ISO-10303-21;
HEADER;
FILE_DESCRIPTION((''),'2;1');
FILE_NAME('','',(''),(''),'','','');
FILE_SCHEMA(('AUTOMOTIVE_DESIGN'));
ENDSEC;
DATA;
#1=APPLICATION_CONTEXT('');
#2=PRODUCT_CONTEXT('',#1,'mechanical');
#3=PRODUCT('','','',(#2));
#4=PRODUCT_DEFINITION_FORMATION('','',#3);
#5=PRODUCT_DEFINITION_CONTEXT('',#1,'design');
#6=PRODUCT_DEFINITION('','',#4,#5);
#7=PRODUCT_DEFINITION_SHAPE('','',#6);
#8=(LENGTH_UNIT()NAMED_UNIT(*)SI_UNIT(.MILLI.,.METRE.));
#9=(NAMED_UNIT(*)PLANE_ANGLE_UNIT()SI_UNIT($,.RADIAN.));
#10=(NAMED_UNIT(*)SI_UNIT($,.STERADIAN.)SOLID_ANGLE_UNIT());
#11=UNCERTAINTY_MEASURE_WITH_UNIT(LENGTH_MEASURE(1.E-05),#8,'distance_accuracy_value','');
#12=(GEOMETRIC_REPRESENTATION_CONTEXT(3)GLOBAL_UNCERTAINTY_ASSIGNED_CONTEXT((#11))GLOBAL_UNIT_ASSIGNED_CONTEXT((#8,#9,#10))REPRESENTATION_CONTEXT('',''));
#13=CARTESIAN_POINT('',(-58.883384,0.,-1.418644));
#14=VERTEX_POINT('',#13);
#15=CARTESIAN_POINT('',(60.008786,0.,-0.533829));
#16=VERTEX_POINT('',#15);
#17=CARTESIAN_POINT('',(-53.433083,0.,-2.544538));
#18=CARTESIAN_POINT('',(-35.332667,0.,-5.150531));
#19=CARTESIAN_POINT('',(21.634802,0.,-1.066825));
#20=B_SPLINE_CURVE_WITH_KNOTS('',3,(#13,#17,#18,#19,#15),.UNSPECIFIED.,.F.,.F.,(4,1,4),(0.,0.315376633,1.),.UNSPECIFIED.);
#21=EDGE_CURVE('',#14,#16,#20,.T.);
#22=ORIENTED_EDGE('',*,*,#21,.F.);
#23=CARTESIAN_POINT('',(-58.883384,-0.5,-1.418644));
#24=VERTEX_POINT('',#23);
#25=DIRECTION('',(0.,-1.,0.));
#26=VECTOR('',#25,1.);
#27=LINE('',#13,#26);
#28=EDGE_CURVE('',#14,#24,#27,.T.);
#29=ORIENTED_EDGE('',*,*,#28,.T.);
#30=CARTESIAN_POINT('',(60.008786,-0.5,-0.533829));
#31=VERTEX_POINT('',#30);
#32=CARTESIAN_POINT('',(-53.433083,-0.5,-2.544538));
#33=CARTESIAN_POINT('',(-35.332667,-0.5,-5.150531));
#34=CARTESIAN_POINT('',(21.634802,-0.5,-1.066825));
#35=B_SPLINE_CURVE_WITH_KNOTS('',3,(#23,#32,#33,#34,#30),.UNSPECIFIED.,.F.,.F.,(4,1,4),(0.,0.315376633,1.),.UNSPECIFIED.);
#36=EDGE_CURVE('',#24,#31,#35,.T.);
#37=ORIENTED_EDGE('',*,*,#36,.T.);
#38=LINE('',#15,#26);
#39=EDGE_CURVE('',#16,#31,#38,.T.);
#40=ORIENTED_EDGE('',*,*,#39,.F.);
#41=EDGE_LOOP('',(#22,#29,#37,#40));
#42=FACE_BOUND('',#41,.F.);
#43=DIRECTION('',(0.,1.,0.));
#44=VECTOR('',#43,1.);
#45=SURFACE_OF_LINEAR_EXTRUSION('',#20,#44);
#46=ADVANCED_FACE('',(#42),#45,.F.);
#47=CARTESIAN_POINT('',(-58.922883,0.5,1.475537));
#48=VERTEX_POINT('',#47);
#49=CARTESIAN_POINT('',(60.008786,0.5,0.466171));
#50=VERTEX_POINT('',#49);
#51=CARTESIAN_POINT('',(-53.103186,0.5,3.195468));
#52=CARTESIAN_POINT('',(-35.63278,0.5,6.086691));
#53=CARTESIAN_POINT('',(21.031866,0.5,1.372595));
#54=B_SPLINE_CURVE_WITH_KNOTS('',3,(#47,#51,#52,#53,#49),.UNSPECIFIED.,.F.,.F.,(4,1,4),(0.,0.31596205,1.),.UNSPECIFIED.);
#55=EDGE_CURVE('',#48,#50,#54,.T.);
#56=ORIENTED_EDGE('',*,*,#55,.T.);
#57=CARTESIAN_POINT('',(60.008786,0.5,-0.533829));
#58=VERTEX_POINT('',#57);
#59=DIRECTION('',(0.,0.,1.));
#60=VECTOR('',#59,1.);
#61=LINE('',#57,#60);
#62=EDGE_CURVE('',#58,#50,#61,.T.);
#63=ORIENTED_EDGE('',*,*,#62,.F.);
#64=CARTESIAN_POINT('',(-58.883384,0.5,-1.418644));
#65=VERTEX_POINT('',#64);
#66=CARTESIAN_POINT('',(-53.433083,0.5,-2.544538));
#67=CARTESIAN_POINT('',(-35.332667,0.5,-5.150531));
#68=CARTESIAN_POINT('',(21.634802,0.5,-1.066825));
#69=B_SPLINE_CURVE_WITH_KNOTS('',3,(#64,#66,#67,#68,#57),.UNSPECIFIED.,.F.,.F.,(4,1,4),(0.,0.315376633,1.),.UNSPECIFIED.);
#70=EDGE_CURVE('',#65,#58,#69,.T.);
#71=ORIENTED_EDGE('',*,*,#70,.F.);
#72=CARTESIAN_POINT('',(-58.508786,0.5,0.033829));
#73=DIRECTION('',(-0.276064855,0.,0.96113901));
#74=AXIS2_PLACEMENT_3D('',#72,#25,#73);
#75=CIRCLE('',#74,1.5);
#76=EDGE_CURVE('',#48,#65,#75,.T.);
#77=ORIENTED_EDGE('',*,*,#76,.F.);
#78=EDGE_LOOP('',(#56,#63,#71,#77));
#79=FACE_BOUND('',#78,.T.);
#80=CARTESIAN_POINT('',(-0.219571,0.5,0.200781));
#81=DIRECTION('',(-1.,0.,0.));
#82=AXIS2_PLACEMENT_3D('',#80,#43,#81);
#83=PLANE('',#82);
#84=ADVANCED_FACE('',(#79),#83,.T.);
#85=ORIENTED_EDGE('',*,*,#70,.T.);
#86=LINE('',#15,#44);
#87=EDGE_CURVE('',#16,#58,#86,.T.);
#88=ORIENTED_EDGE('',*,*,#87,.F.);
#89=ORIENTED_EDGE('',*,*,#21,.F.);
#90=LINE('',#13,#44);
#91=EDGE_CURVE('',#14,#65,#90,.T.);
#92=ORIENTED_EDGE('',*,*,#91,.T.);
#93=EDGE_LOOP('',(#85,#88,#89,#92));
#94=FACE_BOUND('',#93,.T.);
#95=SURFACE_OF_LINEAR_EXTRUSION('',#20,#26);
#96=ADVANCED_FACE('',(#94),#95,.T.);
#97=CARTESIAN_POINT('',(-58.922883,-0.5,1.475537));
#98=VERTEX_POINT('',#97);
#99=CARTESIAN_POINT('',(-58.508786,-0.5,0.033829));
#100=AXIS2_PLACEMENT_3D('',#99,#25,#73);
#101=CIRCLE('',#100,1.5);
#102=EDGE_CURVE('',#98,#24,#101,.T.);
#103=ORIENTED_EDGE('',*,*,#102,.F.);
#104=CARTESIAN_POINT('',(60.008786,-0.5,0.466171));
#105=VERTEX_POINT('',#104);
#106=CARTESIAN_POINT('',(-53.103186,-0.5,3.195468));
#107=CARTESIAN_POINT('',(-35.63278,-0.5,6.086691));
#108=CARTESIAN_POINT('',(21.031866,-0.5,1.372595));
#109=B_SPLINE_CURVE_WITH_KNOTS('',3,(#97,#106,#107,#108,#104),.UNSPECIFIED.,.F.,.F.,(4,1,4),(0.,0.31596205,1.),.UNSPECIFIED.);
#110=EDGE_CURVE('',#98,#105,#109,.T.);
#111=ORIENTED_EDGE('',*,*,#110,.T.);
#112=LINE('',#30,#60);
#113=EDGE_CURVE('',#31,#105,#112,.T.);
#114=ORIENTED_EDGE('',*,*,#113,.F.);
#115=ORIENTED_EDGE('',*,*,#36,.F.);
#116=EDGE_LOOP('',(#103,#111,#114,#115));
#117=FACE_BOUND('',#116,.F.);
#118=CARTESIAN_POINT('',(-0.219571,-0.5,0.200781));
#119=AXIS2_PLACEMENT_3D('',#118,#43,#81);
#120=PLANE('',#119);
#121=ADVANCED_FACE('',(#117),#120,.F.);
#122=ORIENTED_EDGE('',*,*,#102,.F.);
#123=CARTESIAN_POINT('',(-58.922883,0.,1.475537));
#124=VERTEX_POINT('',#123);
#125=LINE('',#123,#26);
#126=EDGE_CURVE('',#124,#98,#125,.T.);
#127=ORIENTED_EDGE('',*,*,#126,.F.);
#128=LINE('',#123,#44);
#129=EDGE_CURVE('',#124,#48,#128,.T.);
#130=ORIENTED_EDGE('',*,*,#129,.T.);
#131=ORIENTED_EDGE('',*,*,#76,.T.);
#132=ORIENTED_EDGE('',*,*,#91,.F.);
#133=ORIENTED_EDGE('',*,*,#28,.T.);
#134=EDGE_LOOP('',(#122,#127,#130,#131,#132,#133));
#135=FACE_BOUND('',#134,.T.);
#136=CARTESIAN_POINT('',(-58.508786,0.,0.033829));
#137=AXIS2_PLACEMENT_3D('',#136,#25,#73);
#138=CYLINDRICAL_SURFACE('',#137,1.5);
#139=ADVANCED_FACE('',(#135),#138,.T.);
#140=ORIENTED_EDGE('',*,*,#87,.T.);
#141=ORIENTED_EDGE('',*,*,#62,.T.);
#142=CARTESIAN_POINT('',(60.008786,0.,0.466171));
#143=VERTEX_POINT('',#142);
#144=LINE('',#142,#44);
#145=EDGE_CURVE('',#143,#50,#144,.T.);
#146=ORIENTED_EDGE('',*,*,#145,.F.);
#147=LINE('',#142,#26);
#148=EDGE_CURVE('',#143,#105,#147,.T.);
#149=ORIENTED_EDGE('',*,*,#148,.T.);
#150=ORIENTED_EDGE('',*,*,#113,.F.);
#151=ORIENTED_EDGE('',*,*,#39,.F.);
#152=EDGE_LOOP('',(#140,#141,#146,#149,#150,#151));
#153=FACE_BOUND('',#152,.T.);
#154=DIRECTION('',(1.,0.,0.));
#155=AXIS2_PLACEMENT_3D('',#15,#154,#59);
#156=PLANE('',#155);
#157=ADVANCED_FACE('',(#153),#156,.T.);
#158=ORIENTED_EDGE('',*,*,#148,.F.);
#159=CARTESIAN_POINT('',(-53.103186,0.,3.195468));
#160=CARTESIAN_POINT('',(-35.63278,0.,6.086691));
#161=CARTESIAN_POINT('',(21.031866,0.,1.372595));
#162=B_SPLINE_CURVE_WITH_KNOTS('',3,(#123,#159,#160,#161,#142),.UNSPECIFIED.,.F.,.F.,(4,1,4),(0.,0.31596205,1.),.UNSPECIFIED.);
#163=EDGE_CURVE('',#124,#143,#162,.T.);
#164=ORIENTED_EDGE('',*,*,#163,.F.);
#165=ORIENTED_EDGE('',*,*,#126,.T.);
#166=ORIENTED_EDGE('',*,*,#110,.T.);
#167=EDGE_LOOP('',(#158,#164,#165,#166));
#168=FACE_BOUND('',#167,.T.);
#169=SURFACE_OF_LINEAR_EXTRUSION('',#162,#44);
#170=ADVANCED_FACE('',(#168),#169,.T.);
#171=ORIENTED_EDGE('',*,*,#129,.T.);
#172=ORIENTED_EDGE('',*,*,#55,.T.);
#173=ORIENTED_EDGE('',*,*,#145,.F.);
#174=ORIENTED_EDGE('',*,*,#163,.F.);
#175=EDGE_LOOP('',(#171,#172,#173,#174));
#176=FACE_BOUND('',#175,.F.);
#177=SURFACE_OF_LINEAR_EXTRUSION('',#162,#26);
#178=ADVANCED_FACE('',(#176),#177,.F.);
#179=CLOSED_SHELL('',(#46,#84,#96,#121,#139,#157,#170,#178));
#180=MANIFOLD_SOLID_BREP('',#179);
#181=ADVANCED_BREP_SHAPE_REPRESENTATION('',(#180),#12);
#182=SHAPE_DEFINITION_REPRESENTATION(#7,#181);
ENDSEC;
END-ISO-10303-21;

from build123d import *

# Parameters (mm, degrees)
F0_R     = 2.2
F1_DEPTH = 0.5


# Not quite as in the source:
# - a feature names something its author has since deleted; it is built from what else it names


with BuildPart() as f1:
    # F0 (on Front) → F1 (new body, symmetric)
    with BuildSketch(Plane.XZ):
        with BuildLine():
            add(Edge.make_bspline(
                [(-58.9228828544, 1.4755374035), (-53.1031861901, 3.1954683363), (-35.6327797164, 6.0866905267), (21.0318658501, 1.3725945028), (60.0087855716, 0.4661711108)],
                knots=[0, 0, 0, 0, 0.3159620499, 1, 1, 1, 1], degree=3))
            ThreePointArc((-58.9228828544, 1.4755374035), (-60.0086458958, 0.0133592085), (-58.8833838701, -1.4186435253))
            add(Edge.make_bspline(
                [(-58.8833838701, -1.4186435253), (-53.4330829978, -2.5445383508), (-35.3326671897, -5.1505314866), (21.6348022223, -1.0668247705), (60.0087855716, -0.5338288892)],
                knots=[0, 0, 0, 0, 0.3153766332, 1, 1, 1, 1], degree=3))
            Line((60.0087855716, -0.5338288892), (60.0087855716, -0.0338288892))
            Line((60.0087855716, -0.0338288892), (60.0087855716, 0.4661711108))
        make_face()
        with BuildLine():
            add(Edge.make_bspline(
                [(-38.2616780698, 3.6168415099), (-37.3862738566, 3.620107016), (-36.5051030136, 3.6204740501), (-35.618541931, 3.6180910206)],
                knots=[0, 0, 0, 0, 2.8040999397, 2.8040999397, 2.8040999397, 2.8040999397], degree=3))
            add(Edge.make_bspline(
                [(-35.618541931, 3.6180910206), (-28.2361493541, 3.598247538), (-20.4800034879, 3.3877176683), (-12.5674262287, 3.0721900892)],
                knots=[2.8040999397, 2.8040999397, 2.8040999397, 2.8040999397, 26.1538352096, 26.1538352096, 26.1538352096, 26.1538352096], degree=3))
            add(Edge.make_bspline(
                [(-12.5674262287, 3.0721900892), (-12.2191674657, 3.0583026741), (-11.8706056681, 3.0442118605), (-11.5217593652, 3.0299249541)],
                knots=[26.1538352096, 26.1538352096, 26.1538352096, 26.1538352096, 27.1815344858, 27.1815344858, 27.1815344858, 27.1815344858], degree=3))
            add(Edge.make_bspline(
                [(-11.5217593652, 3.0299249541), (-4.8786493859, 2.7578581748), (1.8676333595, 2.4146805186), (8.5891307931, 2.0508450631)],
                knots=[27.1815344858, 27.1815344858, 27.1815344858, 27.1815344858, 46.7520996913, 46.7520996913, 46.7520996913, 46.7520996913], degree=3))
            add(Edge.make_bspline(
                [(8.5891307931, 2.0508450631), (8.9659043148, 2.0304502675), (9.3425999571, 2.0099905618), (9.7191951821, 1.9894748324)],
                knots=[46.7520996913, 46.7520996913, 46.7520996913, 46.7520996913, 47.8491276748, 47.8491276748, 47.8491276748, 47.8491276748], degree=3))
            add(Edge.make_bspline(
                [(9.7191951821, 1.9894748324), (22.9972566346, 1.2661275955), (36.1504854864, 0.4731351449), (48.1910333037, 0)],
                knots=[47.8491276748, 47.8491276748, 47.8491276748, 47.8491276748, 86.5283355113, 86.5283355113, 86.5283355113, 86.5283355113], degree=3))
            add(Edge.make_bspline(
                [(9.7191951821, -1.4306571949), (23.0872151546, -0.8738704636), (36.291554297, -0.3020974887), (48.1910333037, 0)],
                knots=[47.589168745, 47.589168745, 47.589168745, 47.589168745, 86.3670691529, 86.3670691529, 86.3670691529, 86.3670691529], degree=3))
            add(Edge.make_bspline(
                [(8.5891307931, -1.4776679077), (8.9659317989, -1.4620138036), (9.3426284313, -1.4463414451), (9.7191951821, -1.4306571949)],
                knots=[46.4968253771, 46.4968253771, 46.4968253771, 46.4968253771, 47.589168745, 47.589168745, 47.589168745, 47.589168745], degree=3))
            add(Edge.make_bspline(
                [(-8.0119146338, -2.1358759001), (-2.5096790564, -1.9338850607), (3.0509994649, -1.7077481956), (8.5891307931, -1.4776679077)],
                knots=[30.4418230465, 30.4418230465, 30.4418230465, 30.4418230465, 46.4968253771, 46.4968253771, 46.4968253771, 46.4968253771], degree=3))
            add(Edge.make_bspline(
                [(-9.1685029524, -2.1780045759), (-8.7832794964, -2.1640850551), (-8.3977407486, -2.1500398412), (-8.0119146338, -2.1358759001)],
                knots=[29.3160189827, 29.3160189827, 29.3160189827, 29.3160189827, 30.4418230465, 30.4418230465, 30.4418230465, 30.4418230465], degree=3))
            add(Edge.make_bspline(
                [(-16.1278416778, -2.4155654967), (-13.8237679533, -2.3420223971), (-11.5019196333, -2.262319385), (-9.1685029524, -2.1780045759)],
                knots=[22.4966783089, 22.4966783089, 22.4966783089, 22.4966783089, 29.3160189827, 29.3160189827, 29.3160189827, 29.3160189827], degree=3))
            add(Edge.make_bspline(
                [(-17.6034438118, -2.4618844422), (-17.1124296707, -2.4467365601), (-16.620542064, -2.4312918657), (-16.1278416778, -2.4155654967)],
                knots=[21.0384386058, 21.0384386058, 21.0384386058, 21.0384386058, 22.4966783089, 22.4966783089, 22.4966783089, 22.4966783089], degree=3))
            add(Edge.make_bspline(
                [(-35.618541931, -2.8627375282), (-29.832875954, -2.7963595375), (-23.7874330759, -2.6526617177), (-17.6034438118, -2.4618844422)],
                knots=[2.6729010132, 2.6729010132, 2.6729010132, 2.6729010132, 21.0384386058, 21.0384386058, 21.0384386058, 21.0384386058], degree=3))
            add(Edge.make_bspline(
                [(-38.1277799606, -2.8867127839), (-37.2971189192, -2.8804209375), (-36.4605816684, -2.8723981111), (-35.618541931, -2.8627375282)],
                knots=[0, 0, 0, 0, 2.6729010132, 2.6729010132, 2.6729010132, 2.6729010132], degree=3))
            add(Edge.make_bspline(
                [(-41.2343927197, -2.813945704), (-40.1954922608, -2.8458899458), (-39.1588154774, -2.8693293605), (-38.1277799606, -2.8867127839)],
                knots=[17.7850046696, 17.7850046696, 17.7850046696, 17.7850046696, 20.8486920648, 20.8486920648, 20.8486920648, 20.8486920648], degree=3))
            add(Edge.make_bspline(
                [(-58.8833838701, -0.9187526302), (-53.3711660516, -2.1564612924), (-47.2653113899, -2.6285062592), (-41.2343927197, -2.813945704)],
                knots=[0, 0, 0, 0, 17.7850046696, 17.7850046696, 17.7850046696, 17.7850046696], degree=3))
            ThreePointArc((-58.8833838701, -0.9187526302), (-59.3690674128, 0.0570033976), (-58.9228828544, 1.0514417663))
            add(Edge.make_bspline(
                [(-58.9228828544, 1.0514417663), (-53.1244599749, 2.7082601042), (-46.8471278917, 3.3047021461), (-41.2402659449, 3.5280295404)],
                knots=[0, 0, 0, 0, 17.6226858026, 17.6226858026, 17.6226858026, 17.6226858026], degree=3))
            add(Edge.make_bspline(
                [(-41.2402659449, 3.5280295404), (-40.2230472035, 3.5685464665), (-39.2278967387, 3.5967824619), (-38.2616780698, 3.6168415099)],
                knots=[17.6226858026, 17.6226858026, 17.6226858026, 17.6226858026, 20.8198621272, 20.8198621272, 20.8198621272, 20.8198621272], degree=3))
        make_face(mode=Mode.SUBTRACT)
        with BuildLine():
            add(Edge.make_bspline(
                [(-35.618541931, 3.6180910206), (-28.2361493541, 3.598247538), (-20.4800034879, 3.3877176683), (-12.5674262287, 3.0721900892)],
                knots=[2.8040999397, 2.8040999397, 2.8040999397, 2.8040999397, 26.1538352096, 26.1538352096, 26.1538352096, 26.1538352096], degree=3))
            Line((-35.618541931, 3.6180910206), (-35.618541931, -2.8627375282))
            add(Edge.make_bspline(
                [(-35.618541931, -2.8627375282), (-29.832875954, -2.7963595375), (-23.7874330759, -2.6526617177), (-17.6034438118, -2.4618844422)],
                knots=[2.6729010132, 2.6729010132, 2.6729010132, 2.6729010132, 21.0384386058, 21.0384386058, 21.0384386058, 21.0384386058], degree=3))
            Line((-17.6034438118, -2.4618844422), (-12.5674262287, 3.0721900892))
        make_face()
        with BuildLine():
            Line((-41.2343927197, -2.813945704), (-41.2402659449, 3.5280295404))
            add(Edge.make_bspline(
                [(-58.9228828544, 1.0514417663), (-53.1244599749, 2.7082601042), (-46.8471278917, 3.3047021461), (-41.2402659449, 3.5280295404)],
                knots=[0, 0, 0, 0, 17.6226858026, 17.6226858026, 17.6226858026, 17.6226858026], degree=3))
            ThreePointArc((-58.9228828544, 1.0514417663), (-59.3690674128, 0.0570033976), (-58.8833838701, -0.9187526302))
            add(Edge.make_bspline(
                [(-58.8833838701, -0.9187526302), (-53.3711660516, -2.1564612924), (-47.2653113899, -2.6285062592), (-41.2343927197, -2.813945704)],
                knots=[0, 0, 0, 0, 17.7850046696, 17.7850046696, 17.7850046696, 17.7850046696], degree=3))
        make_face()
        with BuildLine():
            add(Edge.make_bspline(
                [(-11.5217593652, 3.0299249541), (-4.8786493859, 2.7578581748), (1.8676333595, 2.4146805186), (8.5891307931, 2.0508450631)],
                knots=[27.1815344858, 27.1815344858, 27.1815344858, 27.1815344858, 46.7520996913, 46.7520996913, 46.7520996913, 46.7520996913], degree=3))
            Line((-11.5217593652, 3.0299249541), (-8.0119146338, -2.1358759001))
            add(Edge.make_bspline(
                [(-8.0119146338, -2.1358759001), (-2.5096790564, -1.9338850607), (3.0509994649, -1.7077481956), (8.5891307931, -1.4776679077)],
                knots=[30.4418230465, 30.4418230465, 30.4418230465, 30.4418230465, 46.4968253771, 46.4968253771, 46.4968253771, 46.4968253771], degree=3))
            Line((8.5891307931, -1.4776679077), (8.5891307931, 2.0508450631))
        make_face()
        with BuildLine():
            add(Edge.make_bspline(
                [(9.7191951821, 1.9894748324), (22.9972566346, 1.2661275955), (36.1504854864, 0.4731351449), (48.1910333037, 0)],
                knots=[47.8491276748, 47.8491276748, 47.8491276748, 47.8491276748, 86.5283355113, 86.5283355113, 86.5283355113, 86.5283355113], degree=3))
            Line((9.7191951821, 1.9894748324), (9.7191951821, -1.4306571949))
            add(Edge.make_bspline(
                [(9.7191951821, -1.4306571949), (23.0872151546, -0.8738704636), (36.291554297, -0.3020974887), (48.1910333037, 0)],
                knots=[47.589168745, 47.589168745, 47.589168745, 47.589168745, 86.3670691529, 86.3670691529, 86.3670691529, 86.3670691529], degree=3))
        make_face()
        with BuildLine():
            Line((-35.618541931, -2.8627375282), (-35.618541931, 3.6180910206))
            add(Edge.make_bspline(
                [(-38.2616780698, 3.6168415099), (-37.3862738566, 3.620107016), (-36.5051030136, 3.6204740501), (-35.618541931, 3.6180910206)],
                knots=[0, 0, 0, 0, 2.8040999397, 2.8040999397, 2.8040999397, 2.8040999397], degree=3))
            add(Edge.make_bspline(
                [(-41.2402659449, 3.5280295404), (-40.2230472035, 3.5685464665), (-39.2278967387, 3.5967824619), (-38.2616780698, 3.6168415099)],
                knots=[17.6226858026, 17.6226858026, 17.6226858026, 17.6226858026, 20.8198621272, 20.8198621272, 20.8198621272, 20.8198621272], degree=3))
            Line((-41.2402659449, 3.5280295404), (-41.2343927197, -2.813945704))
            add(Edge.make_bspline(
                [(-41.2343927197, -2.813945704), (-40.1954922608, -2.8458899458), (-39.1588154774, -2.8693293605), (-38.1277799606, -2.8867127839)],
                knots=[17.7850046696, 17.7850046696, 17.7850046696, 17.7850046696, 20.8486920648, 20.8486920648, 20.8486920648, 20.8486920648], degree=3))
            add(Edge.make_bspline(
                [(-38.1277799606, -2.8867127839), (-37.2971189192, -2.8804209375), (-36.4605816684, -2.8723981111), (-35.618541931, -2.8627375282)],
                knots=[0, 0, 0, 0, 2.6729010132, 2.6729010132, 2.6729010132, 2.6729010132], degree=3))
        make_face()
        with Locations((-38.368541931, 0.4547677818)):
            Circle(F0_R, mode=Mode.SUBTRACT)
        with Locations((-38.368541931, 0.4547677818)):
            Circle(F0_R)
        with BuildLine():
            Line((-12.0510029943, 2.0644683304), (-16.1278416778, -2.4155654967))
            add(Edge.make_bspline(
                [(-16.1278416778, -2.4155654967), (-13.8237679533, -2.3420223971), (-11.5019196333, -2.262319385), (-9.1685029524, -2.1780045759)],
                knots=[22.4966783089, 22.4966783089, 22.4966783089, 22.4966783089, 29.3160189827, 29.3160189827, 29.3160189827, 29.3160189827], degree=3))
            Line((-9.1685029524, -2.1780045759), (-12.0510029943, 2.0644683304))
        make_face()
        with BuildLine():
            add(Edge.make_bspline(
                [(-12.5674262287, 3.0721900892), (-12.2191674657, 3.0583026741), (-11.8706056681, 3.0442118605), (-11.5217593652, 3.0299249541)],
                knots=[26.1538352096, 26.1538352096, 26.1538352096, 26.1538352096, 27.1815344858, 27.1815344858, 27.1815344858, 27.1815344858], degree=3))
            Line((-12.5674262287, 3.0721900892), (-17.6034438118, -2.4618844422))
            add(Edge.make_bspline(
                [(-17.6034438118, -2.4618844422), (-17.1124296707, -2.4467365601), (-16.620542064, -2.4312918657), (-16.1278416778, -2.4155654967)],
                knots=[21.0384386058, 21.0384386058, 21.0384386058, 21.0384386058, 22.4966783089, 22.4966783089, 22.4966783089, 22.4966783089], degree=3))
            Line((-16.1278416778, -2.4155654967), (-12.0510029943, 2.0644683304))
            Line((-12.0510029943, 2.0644683304), (-9.1685029524, -2.1780045759))
            add(Edge.make_bspline(
                [(-9.1685029524, -2.1780045759), (-8.7832794964, -2.1640850551), (-8.3977407486, -2.1500398412), (-8.0119146338, -2.1358759001)],
                knots=[29.3160189827, 29.3160189827, 29.3160189827, 29.3160189827, 30.4418230465, 30.4418230465, 30.4418230465, 30.4418230465], degree=3))
            Line((-8.0119146338, -2.1358759001), (-11.5217593652, 3.0299249541))
        make_face()
        with BuildLine():
            add(Edge.make_bspline(
                [(8.5891307931, 2.0508450631), (8.9659043148, 2.0304502675), (9.3425999571, 2.0099905618), (9.7191951821, 1.9894748324)],
                knots=[46.7520996913, 46.7520996913, 46.7520996913, 46.7520996913, 47.8491276748, 47.8491276748, 47.8491276748, 47.8491276748], degree=3))
            Line((8.5891307931, 2.0508450631), (8.5891307931, -1.4776679077))
            add(Edge.make_bspline(
                [(8.5891307931, -1.4776679077), (8.9659317989, -1.4620138036), (9.3426284313, -1.4463414451), (9.7191951821, -1.4306571949)],
                knots=[46.4968253771, 46.4968253771, 46.4968253771, 46.4968253771, 47.589168745, 47.589168745, 47.589168745, 47.589168745], degree=3))
            Line((9.7191951821, -1.4306571949), (9.7191951821, 1.9894748324))
        make_face()
    extrude(amount=F1_DEPTH, both=True)


solid = f1.part
